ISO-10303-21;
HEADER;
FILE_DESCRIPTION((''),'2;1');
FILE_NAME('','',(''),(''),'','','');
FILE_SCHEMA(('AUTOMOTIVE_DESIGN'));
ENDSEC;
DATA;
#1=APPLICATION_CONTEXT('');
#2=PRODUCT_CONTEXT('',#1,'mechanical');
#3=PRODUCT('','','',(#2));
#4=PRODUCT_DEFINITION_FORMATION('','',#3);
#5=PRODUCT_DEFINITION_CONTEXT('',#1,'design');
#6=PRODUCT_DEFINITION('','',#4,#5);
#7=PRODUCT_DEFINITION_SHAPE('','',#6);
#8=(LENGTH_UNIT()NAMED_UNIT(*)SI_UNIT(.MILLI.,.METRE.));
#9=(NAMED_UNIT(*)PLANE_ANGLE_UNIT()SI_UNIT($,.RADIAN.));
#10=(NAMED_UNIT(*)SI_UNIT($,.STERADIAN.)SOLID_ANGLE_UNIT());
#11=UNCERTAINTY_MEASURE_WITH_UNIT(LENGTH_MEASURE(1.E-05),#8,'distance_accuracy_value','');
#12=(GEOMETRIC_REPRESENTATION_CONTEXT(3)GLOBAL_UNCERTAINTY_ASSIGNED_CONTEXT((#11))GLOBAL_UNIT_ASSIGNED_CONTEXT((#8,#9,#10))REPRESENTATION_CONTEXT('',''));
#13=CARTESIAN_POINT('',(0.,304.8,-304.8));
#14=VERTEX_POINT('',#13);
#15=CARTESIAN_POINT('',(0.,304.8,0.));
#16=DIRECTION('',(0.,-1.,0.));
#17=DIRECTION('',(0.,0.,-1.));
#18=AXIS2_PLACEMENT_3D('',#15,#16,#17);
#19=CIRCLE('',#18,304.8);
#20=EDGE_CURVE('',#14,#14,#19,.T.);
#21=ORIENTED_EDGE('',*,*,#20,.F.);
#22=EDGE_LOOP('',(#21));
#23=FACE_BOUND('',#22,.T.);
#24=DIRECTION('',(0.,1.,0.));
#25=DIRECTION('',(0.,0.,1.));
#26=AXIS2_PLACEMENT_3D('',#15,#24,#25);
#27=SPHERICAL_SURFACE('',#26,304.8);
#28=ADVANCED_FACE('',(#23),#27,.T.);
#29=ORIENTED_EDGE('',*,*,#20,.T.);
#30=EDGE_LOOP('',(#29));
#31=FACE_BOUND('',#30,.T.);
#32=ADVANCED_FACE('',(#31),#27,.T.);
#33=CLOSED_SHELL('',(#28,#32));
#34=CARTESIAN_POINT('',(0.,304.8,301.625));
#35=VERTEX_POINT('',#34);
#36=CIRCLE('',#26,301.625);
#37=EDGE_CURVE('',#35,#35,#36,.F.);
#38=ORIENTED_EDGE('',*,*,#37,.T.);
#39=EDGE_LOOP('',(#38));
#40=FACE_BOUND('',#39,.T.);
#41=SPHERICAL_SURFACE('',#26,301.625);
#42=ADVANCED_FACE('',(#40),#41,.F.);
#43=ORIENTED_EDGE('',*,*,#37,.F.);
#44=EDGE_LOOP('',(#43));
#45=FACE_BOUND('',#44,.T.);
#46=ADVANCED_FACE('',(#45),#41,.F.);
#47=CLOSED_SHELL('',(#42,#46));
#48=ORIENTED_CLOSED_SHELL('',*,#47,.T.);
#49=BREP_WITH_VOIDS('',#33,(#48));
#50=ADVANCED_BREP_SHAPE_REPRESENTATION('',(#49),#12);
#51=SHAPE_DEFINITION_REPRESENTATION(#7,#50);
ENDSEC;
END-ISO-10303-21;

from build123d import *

# Parameters (mm, degrees)
SKETCH1_R           = 304.8
BOSS_EXTRUDE1_DEPTH = 609.6
FILLET1_R           = 304.8
SHELL2_T            = 3.175


with BuildPart() as part:
    # Sketch1 → Boss-Extrude1 (new body)
    with BuildSketch(Plane(origin=(0, 0, 0), x_dir=(1, 0, 0), z_dir=(0, 1, 0))):
        with Locations(Location((0, 0, 0), (0, 0, 90))):
            Circle(SKETCH1_R)
    extrude(amount=BOSS_EXTRUDE1_DEPTH)

    # Fillet1
    fillet1_edges = [part.edges().sort_by_distance(p)[0] for p in [
        (0, 0, 304.8),
        (0, 609.6, 304.8),
    ]]
    fillet(fillet1_edges, radius=FILLET1_R - 0.0001)  # a hair under: the kernel refuses the full size

    # Shell2 (no face opened: a closed hollow body)
    add(offset(amount=-SHELL2_T, mode=Mode.PRIVATE), mode=Mode.SUBTRACT)


solid = part.part
